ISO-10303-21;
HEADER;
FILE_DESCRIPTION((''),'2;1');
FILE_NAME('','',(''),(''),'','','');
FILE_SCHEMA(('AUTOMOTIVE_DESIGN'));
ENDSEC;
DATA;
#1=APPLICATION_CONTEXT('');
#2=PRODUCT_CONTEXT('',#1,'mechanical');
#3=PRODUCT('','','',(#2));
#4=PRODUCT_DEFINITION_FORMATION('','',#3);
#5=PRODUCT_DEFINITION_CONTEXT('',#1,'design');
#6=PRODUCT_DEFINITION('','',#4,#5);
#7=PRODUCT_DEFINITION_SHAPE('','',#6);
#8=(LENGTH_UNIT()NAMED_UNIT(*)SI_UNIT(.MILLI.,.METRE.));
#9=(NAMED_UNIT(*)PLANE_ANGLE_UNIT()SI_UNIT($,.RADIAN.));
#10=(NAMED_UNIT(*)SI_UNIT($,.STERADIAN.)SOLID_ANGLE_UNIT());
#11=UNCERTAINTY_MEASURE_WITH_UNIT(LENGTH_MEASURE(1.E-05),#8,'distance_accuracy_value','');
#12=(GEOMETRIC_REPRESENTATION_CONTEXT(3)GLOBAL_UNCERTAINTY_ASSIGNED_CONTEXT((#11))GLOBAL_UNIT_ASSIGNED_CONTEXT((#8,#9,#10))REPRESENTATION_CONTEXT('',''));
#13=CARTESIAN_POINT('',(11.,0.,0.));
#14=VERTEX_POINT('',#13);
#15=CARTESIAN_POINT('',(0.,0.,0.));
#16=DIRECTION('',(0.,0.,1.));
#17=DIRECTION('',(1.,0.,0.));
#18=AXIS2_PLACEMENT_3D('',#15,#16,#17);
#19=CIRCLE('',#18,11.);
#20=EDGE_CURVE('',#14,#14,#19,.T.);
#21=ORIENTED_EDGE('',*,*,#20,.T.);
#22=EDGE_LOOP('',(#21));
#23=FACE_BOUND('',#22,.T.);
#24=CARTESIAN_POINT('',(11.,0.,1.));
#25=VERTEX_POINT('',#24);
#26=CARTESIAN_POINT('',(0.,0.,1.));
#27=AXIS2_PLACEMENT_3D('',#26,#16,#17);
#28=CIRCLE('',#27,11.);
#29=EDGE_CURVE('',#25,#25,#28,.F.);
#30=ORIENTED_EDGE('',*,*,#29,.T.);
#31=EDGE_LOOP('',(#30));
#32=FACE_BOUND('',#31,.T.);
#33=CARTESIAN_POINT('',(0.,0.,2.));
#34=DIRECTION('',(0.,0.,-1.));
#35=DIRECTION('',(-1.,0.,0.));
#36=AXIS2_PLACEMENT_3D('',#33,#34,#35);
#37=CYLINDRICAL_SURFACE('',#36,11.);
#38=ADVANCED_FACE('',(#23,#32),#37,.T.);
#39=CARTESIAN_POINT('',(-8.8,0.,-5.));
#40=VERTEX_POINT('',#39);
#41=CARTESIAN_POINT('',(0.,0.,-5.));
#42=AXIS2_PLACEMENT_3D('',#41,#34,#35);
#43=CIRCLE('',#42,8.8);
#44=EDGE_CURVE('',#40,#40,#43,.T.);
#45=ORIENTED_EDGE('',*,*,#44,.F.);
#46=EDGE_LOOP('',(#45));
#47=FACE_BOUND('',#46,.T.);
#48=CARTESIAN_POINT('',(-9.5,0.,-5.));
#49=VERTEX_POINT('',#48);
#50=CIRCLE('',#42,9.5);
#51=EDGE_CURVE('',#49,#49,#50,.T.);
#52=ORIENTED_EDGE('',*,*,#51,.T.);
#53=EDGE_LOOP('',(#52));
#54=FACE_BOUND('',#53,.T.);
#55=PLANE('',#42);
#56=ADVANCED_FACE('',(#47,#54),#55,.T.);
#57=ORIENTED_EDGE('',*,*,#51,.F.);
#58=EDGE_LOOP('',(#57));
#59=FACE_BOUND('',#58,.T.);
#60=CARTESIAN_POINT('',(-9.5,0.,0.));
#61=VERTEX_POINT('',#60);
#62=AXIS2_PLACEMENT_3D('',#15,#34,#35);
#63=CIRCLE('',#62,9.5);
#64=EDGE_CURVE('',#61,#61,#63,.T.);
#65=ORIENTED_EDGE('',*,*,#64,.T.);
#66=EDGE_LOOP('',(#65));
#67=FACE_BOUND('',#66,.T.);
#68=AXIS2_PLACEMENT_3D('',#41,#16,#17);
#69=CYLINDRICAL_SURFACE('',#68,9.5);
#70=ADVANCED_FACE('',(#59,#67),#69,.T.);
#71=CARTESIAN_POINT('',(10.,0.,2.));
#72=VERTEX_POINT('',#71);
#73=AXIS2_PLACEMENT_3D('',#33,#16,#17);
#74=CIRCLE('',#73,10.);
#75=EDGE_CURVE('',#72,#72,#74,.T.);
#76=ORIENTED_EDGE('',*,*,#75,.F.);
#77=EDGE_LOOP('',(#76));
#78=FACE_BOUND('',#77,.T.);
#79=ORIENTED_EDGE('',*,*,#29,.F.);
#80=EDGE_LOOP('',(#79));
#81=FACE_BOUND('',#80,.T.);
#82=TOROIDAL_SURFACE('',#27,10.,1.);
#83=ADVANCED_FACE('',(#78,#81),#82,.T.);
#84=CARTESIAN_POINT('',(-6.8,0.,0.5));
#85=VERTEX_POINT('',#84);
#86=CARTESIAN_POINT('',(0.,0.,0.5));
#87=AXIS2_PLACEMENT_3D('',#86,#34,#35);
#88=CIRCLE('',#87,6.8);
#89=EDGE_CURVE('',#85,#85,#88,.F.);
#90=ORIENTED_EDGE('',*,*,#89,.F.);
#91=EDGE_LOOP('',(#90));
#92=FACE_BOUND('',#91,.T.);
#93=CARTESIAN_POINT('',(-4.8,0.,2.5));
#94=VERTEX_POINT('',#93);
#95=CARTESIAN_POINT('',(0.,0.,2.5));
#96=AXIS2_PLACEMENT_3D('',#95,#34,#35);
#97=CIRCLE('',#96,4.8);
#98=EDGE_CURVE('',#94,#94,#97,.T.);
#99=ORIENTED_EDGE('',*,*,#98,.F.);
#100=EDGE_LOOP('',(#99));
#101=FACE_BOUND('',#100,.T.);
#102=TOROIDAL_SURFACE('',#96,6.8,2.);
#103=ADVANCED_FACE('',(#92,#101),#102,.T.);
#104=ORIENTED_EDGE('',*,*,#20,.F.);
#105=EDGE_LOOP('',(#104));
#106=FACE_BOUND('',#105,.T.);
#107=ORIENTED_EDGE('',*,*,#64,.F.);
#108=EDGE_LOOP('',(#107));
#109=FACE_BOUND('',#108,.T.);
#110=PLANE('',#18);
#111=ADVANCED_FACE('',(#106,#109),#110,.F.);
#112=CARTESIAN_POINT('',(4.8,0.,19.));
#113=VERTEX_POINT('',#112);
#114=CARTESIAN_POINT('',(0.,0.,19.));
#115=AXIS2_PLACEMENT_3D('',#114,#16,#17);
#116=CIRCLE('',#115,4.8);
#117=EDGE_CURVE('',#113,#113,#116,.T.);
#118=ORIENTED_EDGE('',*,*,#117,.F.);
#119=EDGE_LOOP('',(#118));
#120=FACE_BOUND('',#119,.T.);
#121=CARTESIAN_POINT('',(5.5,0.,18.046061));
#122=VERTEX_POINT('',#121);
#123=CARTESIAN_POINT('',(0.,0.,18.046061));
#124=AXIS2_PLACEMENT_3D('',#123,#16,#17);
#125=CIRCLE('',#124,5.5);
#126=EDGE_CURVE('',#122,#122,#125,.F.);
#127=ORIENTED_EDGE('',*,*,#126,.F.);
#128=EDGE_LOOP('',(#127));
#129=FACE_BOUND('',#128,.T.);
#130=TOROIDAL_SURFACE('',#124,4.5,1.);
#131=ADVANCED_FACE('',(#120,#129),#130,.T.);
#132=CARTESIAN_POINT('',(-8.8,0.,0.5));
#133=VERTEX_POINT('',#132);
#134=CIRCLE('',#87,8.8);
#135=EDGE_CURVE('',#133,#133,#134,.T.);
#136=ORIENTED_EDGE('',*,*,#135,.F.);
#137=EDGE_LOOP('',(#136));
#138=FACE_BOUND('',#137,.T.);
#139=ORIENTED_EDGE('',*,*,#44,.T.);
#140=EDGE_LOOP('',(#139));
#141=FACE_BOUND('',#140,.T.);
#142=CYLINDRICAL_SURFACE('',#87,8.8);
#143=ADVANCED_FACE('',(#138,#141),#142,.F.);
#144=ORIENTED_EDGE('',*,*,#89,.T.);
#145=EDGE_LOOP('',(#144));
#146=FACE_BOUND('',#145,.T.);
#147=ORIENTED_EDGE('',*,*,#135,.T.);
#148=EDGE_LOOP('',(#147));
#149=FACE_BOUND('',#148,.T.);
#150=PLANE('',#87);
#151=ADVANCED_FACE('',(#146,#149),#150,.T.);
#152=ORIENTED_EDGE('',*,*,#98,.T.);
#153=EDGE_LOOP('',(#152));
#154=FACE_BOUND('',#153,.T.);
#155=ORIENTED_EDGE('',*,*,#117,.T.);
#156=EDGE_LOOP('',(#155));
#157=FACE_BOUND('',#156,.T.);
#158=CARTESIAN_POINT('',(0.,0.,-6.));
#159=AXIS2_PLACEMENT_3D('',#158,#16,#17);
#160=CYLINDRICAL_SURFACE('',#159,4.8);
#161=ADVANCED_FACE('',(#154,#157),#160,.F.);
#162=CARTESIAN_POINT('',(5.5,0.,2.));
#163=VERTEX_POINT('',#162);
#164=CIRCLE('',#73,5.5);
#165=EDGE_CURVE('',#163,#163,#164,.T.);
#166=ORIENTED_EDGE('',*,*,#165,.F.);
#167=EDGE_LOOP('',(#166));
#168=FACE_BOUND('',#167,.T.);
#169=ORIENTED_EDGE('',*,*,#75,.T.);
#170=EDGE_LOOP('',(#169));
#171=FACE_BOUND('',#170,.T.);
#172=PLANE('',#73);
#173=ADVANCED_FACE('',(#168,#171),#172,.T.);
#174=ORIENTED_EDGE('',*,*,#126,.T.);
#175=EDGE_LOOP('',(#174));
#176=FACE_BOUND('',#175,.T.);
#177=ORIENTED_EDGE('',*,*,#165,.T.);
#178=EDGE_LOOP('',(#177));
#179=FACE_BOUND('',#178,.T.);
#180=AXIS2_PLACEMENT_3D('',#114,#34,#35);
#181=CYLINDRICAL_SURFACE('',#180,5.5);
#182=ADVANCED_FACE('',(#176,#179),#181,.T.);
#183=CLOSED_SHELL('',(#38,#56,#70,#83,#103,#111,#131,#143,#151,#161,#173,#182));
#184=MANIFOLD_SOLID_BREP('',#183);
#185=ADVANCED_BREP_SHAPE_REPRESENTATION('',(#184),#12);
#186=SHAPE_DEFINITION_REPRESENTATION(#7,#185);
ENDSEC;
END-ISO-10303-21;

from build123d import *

# Parameters (mm, degrees)
SKETCH1_R           = 11
BOSS_EXTRUDE1_DEPTH = 2
SKETCH2_R           = 9.5
BOSS_EXTRUDE2_DEPTH = 5
SKETCH3_R           = 5.5
BOSS_EXTRUDE3_DEPTH = 17
SKETCH4_R           = 4.8
CUT_EXTRUDE1_DEPTH  = 25
SKETCH5_R           = 8.8
CUT_EXTRUDE2_DEPTH  = 5.5
FILLET1_R           = 2
FILLET2_R           = 1
FILLET3_R           = 1


with BuildPart() as part:
    # Sketch1 → Boss-Extrude1 (new body)
    with BuildSketch(Plane.XY):
        Circle(SKETCH1_R)
    extrude(amount=BOSS_EXTRUDE1_DEPTH)

    # Sketch2 → Boss-Extrude2 (add)
    with BuildSketch(Plane(origin=(0, 0, 0), x_dir=(-1, 0, 0), z_dir=(0, 0, -1))):
        Circle(SKETCH2_R)
    extrude(amount=BOSS_EXTRUDE2_DEPTH)

    # Sketch3 → Boss-Extrude3 (add)
    with BuildSketch(Plane.XY.offset(2)):
        Circle(SKETCH3_R)
    extrude(amount=BOSS_EXTRUDE3_DEPTH)

    # Sketch4 → Cut-Extrude1 (cut)
    with BuildSketch(Plane.XY.offset(19)):
        Circle(SKETCH4_R)
    extrude(amount=-CUT_EXTRUDE1_DEPTH, mode=Mode.SUBTRACT)

    # Sketch5 → Cut-Extrude2 (cut)
    with BuildSketch(Plane(origin=(0, 0, -5), x_dir=(-1, 0, 0), z_dir=(0, 0, -1))):
        Circle(SKETCH5_R)
    extrude(amount=-CUT_EXTRUDE2_DEPTH, mode=Mode.SUBTRACT)

    # Fillet1
    fillet1_edges = [part.edges().sort_by_distance(p)[0] for p in [
        (-4.8, 0, 0.5),
    ]]
    fillet(fillet1_edges, radius=FILLET1_R)

    # Fillet2
    fillet2_edges = [part.edges().sort_by_distance(p)[0] for p in [
        (-11, 0, 2),
    ]]
    fillet(fillet2_edges, radius=FILLET2_R)

    # Fillet3
    # the kernel refuses this fillet: 1 mm, written as the material it takes off along each edge
    with BuildSketch(Plane(origin=(0, 0, 19), x_dir=(1, 0, 0), z_dir=(0, -1, 0))) as fillet3_piece_1:
        with BuildLine():
            CenterArc((4.5, -0.953939201), FILLET3_R, 0, 72.542396876)
            Line((4.8, 0), (4.806, 0.019078784))
            ThreePointArc((4.806, 0.019078784), (5.15, 0.02), (5.5, 0.02))
            Line((5.5, 0.02), (5.52, 0))
            Line((5.52, 0), (5.52, -0.953939201))
            Line((5.52, -0.953939201), (5.5, -0.953939201))
        make_face()
    revolve(axis=Axis((0, 0, 19), (0, 0, 1)), mode=Mode.SUBTRACT)


solid = part.part
